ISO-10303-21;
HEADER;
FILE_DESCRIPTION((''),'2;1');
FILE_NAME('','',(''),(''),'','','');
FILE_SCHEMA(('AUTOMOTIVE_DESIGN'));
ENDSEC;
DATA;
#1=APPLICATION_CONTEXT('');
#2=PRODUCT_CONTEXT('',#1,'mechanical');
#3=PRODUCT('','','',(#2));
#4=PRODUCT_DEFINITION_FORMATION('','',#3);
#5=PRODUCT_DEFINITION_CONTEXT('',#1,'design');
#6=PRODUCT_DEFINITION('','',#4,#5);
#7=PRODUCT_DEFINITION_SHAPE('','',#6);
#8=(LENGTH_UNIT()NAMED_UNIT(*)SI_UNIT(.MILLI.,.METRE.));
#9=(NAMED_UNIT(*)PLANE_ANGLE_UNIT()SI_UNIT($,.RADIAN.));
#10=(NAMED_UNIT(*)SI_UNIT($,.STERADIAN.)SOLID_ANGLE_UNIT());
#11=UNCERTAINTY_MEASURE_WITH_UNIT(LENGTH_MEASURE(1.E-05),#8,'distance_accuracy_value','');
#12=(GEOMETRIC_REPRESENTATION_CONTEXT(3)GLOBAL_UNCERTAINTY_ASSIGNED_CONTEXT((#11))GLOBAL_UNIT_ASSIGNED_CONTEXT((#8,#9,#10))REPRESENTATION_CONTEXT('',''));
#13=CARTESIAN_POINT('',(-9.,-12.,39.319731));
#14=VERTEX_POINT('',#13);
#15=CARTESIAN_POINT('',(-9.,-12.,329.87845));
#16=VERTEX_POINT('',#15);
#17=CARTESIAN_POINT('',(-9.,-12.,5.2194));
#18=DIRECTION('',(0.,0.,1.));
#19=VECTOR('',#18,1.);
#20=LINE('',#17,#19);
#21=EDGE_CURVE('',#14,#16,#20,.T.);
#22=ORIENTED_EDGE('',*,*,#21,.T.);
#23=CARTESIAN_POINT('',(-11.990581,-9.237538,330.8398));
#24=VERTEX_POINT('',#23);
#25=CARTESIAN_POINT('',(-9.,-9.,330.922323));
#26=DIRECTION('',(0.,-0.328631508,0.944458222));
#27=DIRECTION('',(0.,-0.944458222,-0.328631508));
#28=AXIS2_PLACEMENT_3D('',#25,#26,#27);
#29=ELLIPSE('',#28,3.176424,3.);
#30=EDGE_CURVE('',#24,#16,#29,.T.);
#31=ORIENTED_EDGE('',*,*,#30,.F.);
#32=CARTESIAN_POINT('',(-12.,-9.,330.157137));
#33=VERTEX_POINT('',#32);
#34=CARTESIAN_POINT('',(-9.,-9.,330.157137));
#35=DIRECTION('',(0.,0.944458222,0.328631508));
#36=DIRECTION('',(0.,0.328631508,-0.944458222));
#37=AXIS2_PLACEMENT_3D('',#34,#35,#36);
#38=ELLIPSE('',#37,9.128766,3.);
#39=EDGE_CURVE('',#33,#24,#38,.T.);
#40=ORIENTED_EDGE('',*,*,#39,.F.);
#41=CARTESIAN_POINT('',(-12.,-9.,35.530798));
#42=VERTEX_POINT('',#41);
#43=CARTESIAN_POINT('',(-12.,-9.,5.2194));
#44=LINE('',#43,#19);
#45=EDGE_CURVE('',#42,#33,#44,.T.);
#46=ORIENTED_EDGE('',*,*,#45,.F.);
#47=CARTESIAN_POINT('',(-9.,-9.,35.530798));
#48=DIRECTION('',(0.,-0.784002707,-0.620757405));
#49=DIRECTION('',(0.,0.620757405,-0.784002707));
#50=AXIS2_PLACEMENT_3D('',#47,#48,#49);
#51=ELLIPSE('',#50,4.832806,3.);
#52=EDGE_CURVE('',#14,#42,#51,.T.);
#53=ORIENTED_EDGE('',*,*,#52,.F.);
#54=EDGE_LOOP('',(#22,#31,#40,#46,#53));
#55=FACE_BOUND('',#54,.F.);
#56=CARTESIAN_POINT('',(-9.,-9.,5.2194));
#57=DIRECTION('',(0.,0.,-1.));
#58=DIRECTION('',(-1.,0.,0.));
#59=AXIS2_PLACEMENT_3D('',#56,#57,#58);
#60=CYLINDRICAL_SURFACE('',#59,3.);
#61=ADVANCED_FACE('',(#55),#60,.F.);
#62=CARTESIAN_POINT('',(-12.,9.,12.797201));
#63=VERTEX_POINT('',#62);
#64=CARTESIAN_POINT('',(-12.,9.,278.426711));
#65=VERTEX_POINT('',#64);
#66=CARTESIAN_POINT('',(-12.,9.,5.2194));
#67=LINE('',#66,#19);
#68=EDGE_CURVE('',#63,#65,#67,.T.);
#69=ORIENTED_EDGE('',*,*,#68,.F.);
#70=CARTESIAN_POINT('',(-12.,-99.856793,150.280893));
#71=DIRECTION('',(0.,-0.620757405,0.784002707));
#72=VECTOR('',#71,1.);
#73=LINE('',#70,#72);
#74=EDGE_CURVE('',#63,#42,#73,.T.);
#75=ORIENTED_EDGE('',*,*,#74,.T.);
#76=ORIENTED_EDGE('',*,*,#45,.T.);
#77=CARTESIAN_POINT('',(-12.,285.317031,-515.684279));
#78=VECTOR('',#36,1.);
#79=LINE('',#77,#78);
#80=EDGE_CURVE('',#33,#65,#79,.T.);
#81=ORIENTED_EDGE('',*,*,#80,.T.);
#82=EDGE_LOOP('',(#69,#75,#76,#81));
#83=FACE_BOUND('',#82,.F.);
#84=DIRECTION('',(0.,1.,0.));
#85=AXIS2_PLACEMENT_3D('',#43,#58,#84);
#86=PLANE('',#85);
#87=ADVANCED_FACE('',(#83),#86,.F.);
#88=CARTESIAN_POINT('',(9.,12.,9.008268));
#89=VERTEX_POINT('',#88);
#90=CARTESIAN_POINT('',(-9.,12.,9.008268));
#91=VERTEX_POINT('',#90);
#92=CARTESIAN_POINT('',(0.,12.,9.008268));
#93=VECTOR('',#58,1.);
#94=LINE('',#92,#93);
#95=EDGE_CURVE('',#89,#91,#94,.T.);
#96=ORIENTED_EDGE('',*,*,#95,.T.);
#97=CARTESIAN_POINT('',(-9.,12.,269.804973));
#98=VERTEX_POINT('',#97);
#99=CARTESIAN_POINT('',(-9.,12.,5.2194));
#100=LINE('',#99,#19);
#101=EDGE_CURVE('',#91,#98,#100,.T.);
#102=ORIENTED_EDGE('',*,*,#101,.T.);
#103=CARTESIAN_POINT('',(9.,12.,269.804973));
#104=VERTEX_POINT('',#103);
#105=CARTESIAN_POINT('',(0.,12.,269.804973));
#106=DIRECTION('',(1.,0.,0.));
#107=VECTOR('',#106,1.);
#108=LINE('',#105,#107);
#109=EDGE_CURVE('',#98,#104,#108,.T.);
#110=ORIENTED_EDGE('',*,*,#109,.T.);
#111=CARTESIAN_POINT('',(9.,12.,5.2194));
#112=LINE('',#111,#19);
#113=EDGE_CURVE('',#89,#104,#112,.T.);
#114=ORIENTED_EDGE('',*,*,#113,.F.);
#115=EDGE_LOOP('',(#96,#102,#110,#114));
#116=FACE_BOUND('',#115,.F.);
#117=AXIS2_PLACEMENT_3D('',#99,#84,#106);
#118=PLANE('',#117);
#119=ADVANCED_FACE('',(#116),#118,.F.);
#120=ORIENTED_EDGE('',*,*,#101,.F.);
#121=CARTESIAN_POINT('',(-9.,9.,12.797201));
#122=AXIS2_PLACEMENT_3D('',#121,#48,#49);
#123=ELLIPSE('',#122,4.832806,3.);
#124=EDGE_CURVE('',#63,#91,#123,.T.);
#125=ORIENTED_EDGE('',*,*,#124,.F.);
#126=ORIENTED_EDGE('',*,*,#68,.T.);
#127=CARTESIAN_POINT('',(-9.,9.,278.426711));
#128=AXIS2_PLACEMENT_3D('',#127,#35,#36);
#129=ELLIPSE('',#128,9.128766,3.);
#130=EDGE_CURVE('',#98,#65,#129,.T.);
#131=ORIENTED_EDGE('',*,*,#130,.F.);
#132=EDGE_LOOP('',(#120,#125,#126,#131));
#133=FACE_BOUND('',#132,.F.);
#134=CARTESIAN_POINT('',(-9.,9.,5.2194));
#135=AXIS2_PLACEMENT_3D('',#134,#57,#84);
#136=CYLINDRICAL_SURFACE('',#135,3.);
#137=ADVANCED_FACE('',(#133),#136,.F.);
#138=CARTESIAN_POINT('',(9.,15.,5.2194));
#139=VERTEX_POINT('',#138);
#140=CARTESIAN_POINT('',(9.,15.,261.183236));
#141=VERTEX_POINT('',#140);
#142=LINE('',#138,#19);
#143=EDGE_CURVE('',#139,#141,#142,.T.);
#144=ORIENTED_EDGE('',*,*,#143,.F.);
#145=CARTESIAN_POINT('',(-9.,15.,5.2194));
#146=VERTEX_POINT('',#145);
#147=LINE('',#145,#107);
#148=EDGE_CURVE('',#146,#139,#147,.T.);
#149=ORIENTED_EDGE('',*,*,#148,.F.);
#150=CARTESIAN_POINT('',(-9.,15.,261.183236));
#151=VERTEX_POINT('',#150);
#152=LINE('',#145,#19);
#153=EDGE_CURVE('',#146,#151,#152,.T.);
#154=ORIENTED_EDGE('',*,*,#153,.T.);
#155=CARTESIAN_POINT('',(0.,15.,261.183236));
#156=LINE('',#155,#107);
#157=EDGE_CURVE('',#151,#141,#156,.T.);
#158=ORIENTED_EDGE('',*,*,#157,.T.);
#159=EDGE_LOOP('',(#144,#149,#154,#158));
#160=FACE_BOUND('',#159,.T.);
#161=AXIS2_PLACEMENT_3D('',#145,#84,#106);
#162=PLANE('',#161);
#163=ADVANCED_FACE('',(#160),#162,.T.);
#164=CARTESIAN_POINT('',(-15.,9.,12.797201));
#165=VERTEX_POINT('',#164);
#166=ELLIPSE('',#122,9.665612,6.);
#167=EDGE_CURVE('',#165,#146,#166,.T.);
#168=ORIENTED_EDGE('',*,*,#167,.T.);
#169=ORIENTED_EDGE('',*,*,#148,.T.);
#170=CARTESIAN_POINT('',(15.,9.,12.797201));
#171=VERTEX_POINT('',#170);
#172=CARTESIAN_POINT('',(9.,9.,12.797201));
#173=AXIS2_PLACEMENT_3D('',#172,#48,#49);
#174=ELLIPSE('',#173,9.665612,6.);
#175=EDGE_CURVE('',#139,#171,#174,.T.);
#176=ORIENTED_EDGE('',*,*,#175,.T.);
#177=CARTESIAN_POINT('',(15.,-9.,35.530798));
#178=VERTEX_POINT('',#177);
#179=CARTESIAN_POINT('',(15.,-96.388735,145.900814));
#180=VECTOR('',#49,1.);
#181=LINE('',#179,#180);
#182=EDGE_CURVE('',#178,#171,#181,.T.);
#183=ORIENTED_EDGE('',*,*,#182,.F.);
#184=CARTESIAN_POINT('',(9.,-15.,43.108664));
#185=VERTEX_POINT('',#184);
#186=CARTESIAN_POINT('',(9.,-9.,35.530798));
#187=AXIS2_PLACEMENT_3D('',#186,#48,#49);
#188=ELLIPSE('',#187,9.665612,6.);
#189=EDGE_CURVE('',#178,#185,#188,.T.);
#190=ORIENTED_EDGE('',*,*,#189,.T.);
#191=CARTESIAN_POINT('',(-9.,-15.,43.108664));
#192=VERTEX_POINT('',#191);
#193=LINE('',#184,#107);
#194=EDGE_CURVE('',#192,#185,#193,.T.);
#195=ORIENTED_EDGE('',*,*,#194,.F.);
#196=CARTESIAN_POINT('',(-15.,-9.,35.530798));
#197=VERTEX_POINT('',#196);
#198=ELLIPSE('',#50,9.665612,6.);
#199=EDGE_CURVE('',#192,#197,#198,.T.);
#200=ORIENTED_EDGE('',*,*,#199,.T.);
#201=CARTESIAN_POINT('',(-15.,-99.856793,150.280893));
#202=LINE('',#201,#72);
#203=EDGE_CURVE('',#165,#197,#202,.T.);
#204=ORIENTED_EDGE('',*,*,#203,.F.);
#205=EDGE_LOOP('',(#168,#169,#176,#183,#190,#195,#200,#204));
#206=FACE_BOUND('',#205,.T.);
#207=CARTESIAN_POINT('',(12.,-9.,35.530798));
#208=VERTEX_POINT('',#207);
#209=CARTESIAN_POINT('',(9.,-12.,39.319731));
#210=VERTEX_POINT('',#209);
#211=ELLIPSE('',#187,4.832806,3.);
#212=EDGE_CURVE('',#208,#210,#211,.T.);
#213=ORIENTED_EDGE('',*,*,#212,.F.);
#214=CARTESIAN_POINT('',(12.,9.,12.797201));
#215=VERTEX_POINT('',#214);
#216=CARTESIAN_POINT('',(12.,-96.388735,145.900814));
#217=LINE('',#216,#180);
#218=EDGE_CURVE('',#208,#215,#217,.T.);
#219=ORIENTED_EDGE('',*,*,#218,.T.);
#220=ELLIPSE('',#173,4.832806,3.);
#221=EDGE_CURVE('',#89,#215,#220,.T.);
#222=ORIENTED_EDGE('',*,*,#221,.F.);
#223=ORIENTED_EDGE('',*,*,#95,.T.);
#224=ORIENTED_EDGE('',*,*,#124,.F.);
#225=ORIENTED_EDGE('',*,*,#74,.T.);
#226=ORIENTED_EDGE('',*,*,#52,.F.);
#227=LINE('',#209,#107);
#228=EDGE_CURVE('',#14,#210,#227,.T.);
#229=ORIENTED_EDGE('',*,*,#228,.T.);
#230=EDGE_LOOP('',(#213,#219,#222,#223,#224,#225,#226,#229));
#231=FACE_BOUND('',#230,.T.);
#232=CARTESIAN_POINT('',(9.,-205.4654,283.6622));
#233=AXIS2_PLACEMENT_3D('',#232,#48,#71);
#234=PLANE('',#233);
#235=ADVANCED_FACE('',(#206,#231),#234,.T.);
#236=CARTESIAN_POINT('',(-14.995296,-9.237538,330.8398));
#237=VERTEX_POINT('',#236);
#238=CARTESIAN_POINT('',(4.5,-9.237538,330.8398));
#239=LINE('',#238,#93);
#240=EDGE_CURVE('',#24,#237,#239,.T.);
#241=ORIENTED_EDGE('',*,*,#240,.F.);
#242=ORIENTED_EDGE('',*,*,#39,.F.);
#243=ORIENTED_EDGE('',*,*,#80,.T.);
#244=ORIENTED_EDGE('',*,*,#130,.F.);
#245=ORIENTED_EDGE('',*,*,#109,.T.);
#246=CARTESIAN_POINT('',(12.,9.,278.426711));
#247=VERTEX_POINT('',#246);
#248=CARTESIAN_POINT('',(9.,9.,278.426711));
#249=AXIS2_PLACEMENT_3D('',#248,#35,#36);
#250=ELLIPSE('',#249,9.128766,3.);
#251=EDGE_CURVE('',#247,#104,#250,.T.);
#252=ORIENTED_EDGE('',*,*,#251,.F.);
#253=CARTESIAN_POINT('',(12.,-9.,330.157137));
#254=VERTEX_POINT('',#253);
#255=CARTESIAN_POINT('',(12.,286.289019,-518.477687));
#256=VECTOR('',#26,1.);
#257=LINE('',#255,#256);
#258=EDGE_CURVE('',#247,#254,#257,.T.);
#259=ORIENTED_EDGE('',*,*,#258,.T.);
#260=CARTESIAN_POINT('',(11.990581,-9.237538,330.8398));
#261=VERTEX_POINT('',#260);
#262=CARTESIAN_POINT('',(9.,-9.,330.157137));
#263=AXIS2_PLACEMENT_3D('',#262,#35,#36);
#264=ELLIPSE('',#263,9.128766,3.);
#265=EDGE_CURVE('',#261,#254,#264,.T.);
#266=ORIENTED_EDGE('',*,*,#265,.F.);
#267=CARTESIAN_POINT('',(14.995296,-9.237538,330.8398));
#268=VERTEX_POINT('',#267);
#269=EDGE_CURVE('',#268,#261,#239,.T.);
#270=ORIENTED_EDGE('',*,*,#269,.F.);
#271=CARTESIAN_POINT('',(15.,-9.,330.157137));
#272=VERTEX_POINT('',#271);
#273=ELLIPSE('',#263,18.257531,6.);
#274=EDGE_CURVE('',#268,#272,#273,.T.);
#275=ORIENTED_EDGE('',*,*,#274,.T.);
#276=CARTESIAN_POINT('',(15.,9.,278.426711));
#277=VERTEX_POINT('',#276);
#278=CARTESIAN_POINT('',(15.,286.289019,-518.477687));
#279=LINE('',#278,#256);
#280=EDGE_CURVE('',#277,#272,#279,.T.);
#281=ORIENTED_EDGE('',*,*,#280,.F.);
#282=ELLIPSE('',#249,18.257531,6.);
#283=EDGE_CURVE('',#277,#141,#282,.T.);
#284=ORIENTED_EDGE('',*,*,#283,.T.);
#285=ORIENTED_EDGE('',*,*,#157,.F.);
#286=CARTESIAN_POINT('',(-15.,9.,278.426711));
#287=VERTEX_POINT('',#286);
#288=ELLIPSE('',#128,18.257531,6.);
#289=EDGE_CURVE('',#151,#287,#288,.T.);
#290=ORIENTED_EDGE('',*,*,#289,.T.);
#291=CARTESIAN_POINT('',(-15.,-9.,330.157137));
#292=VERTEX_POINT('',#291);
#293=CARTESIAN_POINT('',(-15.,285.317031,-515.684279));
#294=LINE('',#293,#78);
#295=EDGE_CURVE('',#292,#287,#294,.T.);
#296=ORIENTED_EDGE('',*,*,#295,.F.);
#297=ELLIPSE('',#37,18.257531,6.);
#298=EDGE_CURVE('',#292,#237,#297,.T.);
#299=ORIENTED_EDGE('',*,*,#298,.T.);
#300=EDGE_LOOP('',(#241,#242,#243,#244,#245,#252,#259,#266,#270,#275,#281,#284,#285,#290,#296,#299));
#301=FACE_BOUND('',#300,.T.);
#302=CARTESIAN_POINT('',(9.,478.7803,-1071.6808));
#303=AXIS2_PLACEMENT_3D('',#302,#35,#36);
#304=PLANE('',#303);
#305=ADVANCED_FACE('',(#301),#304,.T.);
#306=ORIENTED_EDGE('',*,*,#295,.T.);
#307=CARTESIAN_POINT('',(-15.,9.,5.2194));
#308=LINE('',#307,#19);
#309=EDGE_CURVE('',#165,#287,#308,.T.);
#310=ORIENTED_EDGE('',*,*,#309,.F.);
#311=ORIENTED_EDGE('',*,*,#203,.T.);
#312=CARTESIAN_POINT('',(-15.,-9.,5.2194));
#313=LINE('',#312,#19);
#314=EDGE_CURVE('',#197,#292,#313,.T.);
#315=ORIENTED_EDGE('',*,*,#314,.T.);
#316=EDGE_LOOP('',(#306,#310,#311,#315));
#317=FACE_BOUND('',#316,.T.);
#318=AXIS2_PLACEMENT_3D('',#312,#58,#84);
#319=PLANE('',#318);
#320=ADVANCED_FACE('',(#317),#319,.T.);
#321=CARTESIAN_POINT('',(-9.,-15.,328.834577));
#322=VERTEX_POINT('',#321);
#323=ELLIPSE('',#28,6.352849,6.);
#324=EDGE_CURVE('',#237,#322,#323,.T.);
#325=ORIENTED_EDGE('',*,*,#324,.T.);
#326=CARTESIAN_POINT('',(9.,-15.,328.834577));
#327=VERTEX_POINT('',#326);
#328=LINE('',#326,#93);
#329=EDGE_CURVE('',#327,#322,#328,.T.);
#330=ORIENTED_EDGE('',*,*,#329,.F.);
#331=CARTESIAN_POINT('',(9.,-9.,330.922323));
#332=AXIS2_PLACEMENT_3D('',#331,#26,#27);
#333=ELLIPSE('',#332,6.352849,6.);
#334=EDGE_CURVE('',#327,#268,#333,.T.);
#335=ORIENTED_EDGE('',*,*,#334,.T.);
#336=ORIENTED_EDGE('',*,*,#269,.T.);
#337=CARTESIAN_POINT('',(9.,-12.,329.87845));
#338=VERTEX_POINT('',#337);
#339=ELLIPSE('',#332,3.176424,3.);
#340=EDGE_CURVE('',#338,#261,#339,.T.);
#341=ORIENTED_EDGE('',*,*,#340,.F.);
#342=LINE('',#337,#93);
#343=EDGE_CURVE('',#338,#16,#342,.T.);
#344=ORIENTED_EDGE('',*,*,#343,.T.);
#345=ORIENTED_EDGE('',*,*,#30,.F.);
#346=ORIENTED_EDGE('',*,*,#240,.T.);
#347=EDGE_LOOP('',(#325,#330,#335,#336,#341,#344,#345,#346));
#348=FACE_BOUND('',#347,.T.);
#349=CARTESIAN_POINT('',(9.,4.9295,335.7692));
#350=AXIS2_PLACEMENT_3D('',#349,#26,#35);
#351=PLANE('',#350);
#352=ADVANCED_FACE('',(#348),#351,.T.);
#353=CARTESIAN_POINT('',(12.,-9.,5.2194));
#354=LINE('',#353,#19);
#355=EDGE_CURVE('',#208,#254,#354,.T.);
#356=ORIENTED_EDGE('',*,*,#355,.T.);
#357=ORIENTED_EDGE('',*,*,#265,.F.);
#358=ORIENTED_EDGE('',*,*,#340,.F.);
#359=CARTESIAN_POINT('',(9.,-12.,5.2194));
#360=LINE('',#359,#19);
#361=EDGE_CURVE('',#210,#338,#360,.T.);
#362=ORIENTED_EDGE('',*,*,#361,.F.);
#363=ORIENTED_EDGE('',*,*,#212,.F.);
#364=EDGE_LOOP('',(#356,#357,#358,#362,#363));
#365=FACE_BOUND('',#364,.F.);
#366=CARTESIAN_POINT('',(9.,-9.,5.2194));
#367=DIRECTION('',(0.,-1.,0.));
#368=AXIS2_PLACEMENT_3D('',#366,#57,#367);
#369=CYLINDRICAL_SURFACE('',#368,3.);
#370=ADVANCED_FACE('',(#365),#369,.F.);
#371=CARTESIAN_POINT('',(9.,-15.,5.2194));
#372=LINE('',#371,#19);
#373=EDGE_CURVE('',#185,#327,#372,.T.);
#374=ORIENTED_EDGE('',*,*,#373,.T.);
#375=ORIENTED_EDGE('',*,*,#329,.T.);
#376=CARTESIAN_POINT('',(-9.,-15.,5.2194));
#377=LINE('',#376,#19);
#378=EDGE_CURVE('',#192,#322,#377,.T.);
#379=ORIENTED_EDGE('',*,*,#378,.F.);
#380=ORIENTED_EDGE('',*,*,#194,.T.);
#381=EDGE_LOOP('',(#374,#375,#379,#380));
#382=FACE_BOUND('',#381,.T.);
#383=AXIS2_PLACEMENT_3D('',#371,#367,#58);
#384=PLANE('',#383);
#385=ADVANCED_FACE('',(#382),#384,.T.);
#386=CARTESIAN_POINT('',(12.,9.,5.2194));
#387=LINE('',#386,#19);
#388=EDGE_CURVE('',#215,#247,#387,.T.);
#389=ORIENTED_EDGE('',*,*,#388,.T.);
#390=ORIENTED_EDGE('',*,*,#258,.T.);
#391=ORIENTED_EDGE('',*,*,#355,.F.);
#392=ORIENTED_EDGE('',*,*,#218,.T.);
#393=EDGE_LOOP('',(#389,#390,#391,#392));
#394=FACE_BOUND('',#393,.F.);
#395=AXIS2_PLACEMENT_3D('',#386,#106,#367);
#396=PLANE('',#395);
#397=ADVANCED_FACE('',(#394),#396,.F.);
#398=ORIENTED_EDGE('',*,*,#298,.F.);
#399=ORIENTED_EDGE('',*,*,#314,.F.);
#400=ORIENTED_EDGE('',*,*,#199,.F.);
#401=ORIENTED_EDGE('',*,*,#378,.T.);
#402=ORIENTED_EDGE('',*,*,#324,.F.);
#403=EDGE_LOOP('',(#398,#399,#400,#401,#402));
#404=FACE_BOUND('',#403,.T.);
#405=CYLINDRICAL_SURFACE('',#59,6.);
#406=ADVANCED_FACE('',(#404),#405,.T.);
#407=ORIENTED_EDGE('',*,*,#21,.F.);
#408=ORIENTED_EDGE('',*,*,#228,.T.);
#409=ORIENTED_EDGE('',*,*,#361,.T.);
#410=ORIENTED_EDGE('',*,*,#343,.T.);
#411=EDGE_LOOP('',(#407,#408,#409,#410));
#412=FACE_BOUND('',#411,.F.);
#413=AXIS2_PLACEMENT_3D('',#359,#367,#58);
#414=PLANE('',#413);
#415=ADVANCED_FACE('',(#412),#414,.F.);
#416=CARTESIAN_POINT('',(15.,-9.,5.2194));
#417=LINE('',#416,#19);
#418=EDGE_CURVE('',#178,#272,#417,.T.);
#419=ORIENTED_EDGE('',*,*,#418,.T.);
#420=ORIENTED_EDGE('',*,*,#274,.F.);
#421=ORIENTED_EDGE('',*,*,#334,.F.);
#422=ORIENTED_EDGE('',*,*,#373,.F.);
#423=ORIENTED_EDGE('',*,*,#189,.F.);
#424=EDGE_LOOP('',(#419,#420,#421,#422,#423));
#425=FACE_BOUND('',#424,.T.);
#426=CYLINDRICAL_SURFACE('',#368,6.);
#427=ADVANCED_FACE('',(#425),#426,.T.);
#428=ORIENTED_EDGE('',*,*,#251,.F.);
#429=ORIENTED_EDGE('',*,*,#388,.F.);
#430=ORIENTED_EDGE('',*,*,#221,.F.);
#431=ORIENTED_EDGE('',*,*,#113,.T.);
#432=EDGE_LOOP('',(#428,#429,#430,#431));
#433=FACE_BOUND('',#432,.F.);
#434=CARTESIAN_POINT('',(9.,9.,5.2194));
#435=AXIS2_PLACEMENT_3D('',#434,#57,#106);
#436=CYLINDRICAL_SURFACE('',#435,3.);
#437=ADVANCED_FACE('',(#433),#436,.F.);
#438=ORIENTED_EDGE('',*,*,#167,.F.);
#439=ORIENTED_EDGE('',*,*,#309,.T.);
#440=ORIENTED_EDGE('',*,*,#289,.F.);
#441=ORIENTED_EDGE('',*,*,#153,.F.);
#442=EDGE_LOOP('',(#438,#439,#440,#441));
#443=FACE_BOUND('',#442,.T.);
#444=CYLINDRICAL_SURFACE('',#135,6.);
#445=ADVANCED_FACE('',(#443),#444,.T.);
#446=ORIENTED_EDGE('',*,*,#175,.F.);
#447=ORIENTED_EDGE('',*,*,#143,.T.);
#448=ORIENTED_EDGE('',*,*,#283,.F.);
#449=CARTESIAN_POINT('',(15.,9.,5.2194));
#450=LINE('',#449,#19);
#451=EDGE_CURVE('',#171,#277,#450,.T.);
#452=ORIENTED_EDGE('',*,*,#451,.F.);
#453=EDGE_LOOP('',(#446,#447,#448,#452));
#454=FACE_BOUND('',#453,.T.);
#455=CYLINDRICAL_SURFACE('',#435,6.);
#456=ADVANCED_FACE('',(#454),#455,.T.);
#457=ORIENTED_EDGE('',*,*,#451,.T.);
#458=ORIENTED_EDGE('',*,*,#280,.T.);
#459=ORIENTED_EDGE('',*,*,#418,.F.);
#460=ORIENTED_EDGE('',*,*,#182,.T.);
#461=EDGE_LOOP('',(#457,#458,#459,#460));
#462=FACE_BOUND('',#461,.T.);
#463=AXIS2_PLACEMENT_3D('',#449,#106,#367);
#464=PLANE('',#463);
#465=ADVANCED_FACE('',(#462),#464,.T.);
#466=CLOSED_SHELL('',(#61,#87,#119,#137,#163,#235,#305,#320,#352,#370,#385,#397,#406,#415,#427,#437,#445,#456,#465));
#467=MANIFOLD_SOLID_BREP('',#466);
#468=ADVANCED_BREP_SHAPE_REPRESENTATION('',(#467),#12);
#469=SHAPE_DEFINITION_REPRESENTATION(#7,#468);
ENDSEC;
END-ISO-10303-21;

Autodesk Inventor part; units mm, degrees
ref_plane "Start Plane" through (0, 0, 5.2194) normal (0, 0, 1) x (1, 0, 0)
ref_plane "End Plane" through (0, 0, 330.8397) normal (0, 0, 1) x (1, 0, 0)
sketch "Sketch" plane through (0, 0, 0) normal (0, 0, 1) x (1, 0, 0)
  line L0 (-15, -9) -> (-15, 9)
  line L1 (-9, 15) -> (9, 15)
  line L2 (15, 9) -> (15, -9)
  line L3 (9, -15) -> (-9, -15)
  arc A0 (-15, -9) -> (-9, -15) centre (-9, -9) ccw
  arc A1 (-9, 15) -> (-15, 9) centre (-9, 9) ccw
  arc A2 (15, 9) -> (9, 15) centre (9, 9) ccw
  arc A3 (9, -15) -> (15, -9) centre (9, -9) ccw
  arc A4 (-9, 12) -> (-12, 9) centre (-9, 9) ccw
  line L4 (-9, 12) -> (9, 12)
  arc A5 (12, 9) -> (9, 12) centre (9, 9) ccw
  line L5 (12, 9) -> (12, -9)
  arc A6 (9, -12) -> (12, -9) centre (9, -9) ccw
  line L6 (9, -12) -> (-9, -12)
  arc A7 (-12, -9) -> (-9, -12) centre (-9, -9) ccw
  line L7 (-12, -9) -> (-12, 9)
  line L8 (0, 22.7397) -> (0, -22.7397) construction
  line L9 (-22.7397, 0) -> (22.7397, 0) construction
  dimension "d7" = 6
  dimension "d10" = 30
  dimension "d11" = 30
  dimension "d12" = 3
  dimension "d15" = 15
  dimension "d16" = 15
extrude "Body" add sketch "Sketch" along normal up to surface (325.6204 mm away) from surface at 5.2194
sketch "Sketch3" plane through (0, 0, 0) normal (0, 0, 1) x (1, 0, 0)
  line L0 (0, 0) -> (10, 0)
ref_plane "Work Plane3" through (0, 0, 0) normal (0, -1, 0) x (1, 0, 0)
ref_plane "Work Plane4" through (9, 478.7803, -1071.6808) normal (0, 0.9444582, 0.3286315) x (1, 0, 0)
split "Split1" plane through (9, 478.7803, -1071.6808) removes the side toward (0, 0.9444582, 0.3286315)
ref_plane "Work Plane5" through (9, -205.4654, 283.6622) normal (0, -0.7840027, -0.6207574) x (1, 0, 0)
split "Split2" plane through (9, -205.4654, 283.6622) removes the side toward (0, -0.7840027, -0.6207574)
ref_plane "Work Plane6" through (9, 4.9295, 335.7692) normal (0, -0.3286315, 0.9444582) x (1, 0, 0)
split "Split3" plane through (9, 4.9295, 335.7692) removes the side toward (0, -0.3286315, 0.9444582)
sketch "Sketch4" plane through (0, 0, 0) normal (0, -1, 0) x (1, 0, 0)
  line L0 (-2, 5.2194) -> (12, 5.2194) projected
  line L1 (-2, 330.8397) -> (12, 330.8397) projected
  dimension "d18" = 325.6204
equation "\"d7\" = G_IR"
equation "\"d10\" = G_H"
equation "\"d11\" = G_W"
equation "\"d12\" = G_T"
equation "\"d15\" = 0.5 * d10"
equation "\"d16\" = 0.5 * d11"
equation "\"d3\" = G_L"
equation "\"G_W\" = 30"
equation "\"G_H\" = 30"
equation "\"G_T\" = 3"
equation "\"G_IR\" = 6"
equation "\"G_L\" = d18"
equation "\"G_OFFSET_START\" = -5.21936"
equation "\"G_OFFSET_END\" = -19.09635"
equation "\"d13\" = -G_OFFSET_START"
equation "\"d14\" = G_OFFSET_END + B_L"
equation "\"B_L\" = 349.93607"
properties part number "DIN EN 10219-2 - 30 x 30 x 3  - 325.62" material "Steel, Mild"
